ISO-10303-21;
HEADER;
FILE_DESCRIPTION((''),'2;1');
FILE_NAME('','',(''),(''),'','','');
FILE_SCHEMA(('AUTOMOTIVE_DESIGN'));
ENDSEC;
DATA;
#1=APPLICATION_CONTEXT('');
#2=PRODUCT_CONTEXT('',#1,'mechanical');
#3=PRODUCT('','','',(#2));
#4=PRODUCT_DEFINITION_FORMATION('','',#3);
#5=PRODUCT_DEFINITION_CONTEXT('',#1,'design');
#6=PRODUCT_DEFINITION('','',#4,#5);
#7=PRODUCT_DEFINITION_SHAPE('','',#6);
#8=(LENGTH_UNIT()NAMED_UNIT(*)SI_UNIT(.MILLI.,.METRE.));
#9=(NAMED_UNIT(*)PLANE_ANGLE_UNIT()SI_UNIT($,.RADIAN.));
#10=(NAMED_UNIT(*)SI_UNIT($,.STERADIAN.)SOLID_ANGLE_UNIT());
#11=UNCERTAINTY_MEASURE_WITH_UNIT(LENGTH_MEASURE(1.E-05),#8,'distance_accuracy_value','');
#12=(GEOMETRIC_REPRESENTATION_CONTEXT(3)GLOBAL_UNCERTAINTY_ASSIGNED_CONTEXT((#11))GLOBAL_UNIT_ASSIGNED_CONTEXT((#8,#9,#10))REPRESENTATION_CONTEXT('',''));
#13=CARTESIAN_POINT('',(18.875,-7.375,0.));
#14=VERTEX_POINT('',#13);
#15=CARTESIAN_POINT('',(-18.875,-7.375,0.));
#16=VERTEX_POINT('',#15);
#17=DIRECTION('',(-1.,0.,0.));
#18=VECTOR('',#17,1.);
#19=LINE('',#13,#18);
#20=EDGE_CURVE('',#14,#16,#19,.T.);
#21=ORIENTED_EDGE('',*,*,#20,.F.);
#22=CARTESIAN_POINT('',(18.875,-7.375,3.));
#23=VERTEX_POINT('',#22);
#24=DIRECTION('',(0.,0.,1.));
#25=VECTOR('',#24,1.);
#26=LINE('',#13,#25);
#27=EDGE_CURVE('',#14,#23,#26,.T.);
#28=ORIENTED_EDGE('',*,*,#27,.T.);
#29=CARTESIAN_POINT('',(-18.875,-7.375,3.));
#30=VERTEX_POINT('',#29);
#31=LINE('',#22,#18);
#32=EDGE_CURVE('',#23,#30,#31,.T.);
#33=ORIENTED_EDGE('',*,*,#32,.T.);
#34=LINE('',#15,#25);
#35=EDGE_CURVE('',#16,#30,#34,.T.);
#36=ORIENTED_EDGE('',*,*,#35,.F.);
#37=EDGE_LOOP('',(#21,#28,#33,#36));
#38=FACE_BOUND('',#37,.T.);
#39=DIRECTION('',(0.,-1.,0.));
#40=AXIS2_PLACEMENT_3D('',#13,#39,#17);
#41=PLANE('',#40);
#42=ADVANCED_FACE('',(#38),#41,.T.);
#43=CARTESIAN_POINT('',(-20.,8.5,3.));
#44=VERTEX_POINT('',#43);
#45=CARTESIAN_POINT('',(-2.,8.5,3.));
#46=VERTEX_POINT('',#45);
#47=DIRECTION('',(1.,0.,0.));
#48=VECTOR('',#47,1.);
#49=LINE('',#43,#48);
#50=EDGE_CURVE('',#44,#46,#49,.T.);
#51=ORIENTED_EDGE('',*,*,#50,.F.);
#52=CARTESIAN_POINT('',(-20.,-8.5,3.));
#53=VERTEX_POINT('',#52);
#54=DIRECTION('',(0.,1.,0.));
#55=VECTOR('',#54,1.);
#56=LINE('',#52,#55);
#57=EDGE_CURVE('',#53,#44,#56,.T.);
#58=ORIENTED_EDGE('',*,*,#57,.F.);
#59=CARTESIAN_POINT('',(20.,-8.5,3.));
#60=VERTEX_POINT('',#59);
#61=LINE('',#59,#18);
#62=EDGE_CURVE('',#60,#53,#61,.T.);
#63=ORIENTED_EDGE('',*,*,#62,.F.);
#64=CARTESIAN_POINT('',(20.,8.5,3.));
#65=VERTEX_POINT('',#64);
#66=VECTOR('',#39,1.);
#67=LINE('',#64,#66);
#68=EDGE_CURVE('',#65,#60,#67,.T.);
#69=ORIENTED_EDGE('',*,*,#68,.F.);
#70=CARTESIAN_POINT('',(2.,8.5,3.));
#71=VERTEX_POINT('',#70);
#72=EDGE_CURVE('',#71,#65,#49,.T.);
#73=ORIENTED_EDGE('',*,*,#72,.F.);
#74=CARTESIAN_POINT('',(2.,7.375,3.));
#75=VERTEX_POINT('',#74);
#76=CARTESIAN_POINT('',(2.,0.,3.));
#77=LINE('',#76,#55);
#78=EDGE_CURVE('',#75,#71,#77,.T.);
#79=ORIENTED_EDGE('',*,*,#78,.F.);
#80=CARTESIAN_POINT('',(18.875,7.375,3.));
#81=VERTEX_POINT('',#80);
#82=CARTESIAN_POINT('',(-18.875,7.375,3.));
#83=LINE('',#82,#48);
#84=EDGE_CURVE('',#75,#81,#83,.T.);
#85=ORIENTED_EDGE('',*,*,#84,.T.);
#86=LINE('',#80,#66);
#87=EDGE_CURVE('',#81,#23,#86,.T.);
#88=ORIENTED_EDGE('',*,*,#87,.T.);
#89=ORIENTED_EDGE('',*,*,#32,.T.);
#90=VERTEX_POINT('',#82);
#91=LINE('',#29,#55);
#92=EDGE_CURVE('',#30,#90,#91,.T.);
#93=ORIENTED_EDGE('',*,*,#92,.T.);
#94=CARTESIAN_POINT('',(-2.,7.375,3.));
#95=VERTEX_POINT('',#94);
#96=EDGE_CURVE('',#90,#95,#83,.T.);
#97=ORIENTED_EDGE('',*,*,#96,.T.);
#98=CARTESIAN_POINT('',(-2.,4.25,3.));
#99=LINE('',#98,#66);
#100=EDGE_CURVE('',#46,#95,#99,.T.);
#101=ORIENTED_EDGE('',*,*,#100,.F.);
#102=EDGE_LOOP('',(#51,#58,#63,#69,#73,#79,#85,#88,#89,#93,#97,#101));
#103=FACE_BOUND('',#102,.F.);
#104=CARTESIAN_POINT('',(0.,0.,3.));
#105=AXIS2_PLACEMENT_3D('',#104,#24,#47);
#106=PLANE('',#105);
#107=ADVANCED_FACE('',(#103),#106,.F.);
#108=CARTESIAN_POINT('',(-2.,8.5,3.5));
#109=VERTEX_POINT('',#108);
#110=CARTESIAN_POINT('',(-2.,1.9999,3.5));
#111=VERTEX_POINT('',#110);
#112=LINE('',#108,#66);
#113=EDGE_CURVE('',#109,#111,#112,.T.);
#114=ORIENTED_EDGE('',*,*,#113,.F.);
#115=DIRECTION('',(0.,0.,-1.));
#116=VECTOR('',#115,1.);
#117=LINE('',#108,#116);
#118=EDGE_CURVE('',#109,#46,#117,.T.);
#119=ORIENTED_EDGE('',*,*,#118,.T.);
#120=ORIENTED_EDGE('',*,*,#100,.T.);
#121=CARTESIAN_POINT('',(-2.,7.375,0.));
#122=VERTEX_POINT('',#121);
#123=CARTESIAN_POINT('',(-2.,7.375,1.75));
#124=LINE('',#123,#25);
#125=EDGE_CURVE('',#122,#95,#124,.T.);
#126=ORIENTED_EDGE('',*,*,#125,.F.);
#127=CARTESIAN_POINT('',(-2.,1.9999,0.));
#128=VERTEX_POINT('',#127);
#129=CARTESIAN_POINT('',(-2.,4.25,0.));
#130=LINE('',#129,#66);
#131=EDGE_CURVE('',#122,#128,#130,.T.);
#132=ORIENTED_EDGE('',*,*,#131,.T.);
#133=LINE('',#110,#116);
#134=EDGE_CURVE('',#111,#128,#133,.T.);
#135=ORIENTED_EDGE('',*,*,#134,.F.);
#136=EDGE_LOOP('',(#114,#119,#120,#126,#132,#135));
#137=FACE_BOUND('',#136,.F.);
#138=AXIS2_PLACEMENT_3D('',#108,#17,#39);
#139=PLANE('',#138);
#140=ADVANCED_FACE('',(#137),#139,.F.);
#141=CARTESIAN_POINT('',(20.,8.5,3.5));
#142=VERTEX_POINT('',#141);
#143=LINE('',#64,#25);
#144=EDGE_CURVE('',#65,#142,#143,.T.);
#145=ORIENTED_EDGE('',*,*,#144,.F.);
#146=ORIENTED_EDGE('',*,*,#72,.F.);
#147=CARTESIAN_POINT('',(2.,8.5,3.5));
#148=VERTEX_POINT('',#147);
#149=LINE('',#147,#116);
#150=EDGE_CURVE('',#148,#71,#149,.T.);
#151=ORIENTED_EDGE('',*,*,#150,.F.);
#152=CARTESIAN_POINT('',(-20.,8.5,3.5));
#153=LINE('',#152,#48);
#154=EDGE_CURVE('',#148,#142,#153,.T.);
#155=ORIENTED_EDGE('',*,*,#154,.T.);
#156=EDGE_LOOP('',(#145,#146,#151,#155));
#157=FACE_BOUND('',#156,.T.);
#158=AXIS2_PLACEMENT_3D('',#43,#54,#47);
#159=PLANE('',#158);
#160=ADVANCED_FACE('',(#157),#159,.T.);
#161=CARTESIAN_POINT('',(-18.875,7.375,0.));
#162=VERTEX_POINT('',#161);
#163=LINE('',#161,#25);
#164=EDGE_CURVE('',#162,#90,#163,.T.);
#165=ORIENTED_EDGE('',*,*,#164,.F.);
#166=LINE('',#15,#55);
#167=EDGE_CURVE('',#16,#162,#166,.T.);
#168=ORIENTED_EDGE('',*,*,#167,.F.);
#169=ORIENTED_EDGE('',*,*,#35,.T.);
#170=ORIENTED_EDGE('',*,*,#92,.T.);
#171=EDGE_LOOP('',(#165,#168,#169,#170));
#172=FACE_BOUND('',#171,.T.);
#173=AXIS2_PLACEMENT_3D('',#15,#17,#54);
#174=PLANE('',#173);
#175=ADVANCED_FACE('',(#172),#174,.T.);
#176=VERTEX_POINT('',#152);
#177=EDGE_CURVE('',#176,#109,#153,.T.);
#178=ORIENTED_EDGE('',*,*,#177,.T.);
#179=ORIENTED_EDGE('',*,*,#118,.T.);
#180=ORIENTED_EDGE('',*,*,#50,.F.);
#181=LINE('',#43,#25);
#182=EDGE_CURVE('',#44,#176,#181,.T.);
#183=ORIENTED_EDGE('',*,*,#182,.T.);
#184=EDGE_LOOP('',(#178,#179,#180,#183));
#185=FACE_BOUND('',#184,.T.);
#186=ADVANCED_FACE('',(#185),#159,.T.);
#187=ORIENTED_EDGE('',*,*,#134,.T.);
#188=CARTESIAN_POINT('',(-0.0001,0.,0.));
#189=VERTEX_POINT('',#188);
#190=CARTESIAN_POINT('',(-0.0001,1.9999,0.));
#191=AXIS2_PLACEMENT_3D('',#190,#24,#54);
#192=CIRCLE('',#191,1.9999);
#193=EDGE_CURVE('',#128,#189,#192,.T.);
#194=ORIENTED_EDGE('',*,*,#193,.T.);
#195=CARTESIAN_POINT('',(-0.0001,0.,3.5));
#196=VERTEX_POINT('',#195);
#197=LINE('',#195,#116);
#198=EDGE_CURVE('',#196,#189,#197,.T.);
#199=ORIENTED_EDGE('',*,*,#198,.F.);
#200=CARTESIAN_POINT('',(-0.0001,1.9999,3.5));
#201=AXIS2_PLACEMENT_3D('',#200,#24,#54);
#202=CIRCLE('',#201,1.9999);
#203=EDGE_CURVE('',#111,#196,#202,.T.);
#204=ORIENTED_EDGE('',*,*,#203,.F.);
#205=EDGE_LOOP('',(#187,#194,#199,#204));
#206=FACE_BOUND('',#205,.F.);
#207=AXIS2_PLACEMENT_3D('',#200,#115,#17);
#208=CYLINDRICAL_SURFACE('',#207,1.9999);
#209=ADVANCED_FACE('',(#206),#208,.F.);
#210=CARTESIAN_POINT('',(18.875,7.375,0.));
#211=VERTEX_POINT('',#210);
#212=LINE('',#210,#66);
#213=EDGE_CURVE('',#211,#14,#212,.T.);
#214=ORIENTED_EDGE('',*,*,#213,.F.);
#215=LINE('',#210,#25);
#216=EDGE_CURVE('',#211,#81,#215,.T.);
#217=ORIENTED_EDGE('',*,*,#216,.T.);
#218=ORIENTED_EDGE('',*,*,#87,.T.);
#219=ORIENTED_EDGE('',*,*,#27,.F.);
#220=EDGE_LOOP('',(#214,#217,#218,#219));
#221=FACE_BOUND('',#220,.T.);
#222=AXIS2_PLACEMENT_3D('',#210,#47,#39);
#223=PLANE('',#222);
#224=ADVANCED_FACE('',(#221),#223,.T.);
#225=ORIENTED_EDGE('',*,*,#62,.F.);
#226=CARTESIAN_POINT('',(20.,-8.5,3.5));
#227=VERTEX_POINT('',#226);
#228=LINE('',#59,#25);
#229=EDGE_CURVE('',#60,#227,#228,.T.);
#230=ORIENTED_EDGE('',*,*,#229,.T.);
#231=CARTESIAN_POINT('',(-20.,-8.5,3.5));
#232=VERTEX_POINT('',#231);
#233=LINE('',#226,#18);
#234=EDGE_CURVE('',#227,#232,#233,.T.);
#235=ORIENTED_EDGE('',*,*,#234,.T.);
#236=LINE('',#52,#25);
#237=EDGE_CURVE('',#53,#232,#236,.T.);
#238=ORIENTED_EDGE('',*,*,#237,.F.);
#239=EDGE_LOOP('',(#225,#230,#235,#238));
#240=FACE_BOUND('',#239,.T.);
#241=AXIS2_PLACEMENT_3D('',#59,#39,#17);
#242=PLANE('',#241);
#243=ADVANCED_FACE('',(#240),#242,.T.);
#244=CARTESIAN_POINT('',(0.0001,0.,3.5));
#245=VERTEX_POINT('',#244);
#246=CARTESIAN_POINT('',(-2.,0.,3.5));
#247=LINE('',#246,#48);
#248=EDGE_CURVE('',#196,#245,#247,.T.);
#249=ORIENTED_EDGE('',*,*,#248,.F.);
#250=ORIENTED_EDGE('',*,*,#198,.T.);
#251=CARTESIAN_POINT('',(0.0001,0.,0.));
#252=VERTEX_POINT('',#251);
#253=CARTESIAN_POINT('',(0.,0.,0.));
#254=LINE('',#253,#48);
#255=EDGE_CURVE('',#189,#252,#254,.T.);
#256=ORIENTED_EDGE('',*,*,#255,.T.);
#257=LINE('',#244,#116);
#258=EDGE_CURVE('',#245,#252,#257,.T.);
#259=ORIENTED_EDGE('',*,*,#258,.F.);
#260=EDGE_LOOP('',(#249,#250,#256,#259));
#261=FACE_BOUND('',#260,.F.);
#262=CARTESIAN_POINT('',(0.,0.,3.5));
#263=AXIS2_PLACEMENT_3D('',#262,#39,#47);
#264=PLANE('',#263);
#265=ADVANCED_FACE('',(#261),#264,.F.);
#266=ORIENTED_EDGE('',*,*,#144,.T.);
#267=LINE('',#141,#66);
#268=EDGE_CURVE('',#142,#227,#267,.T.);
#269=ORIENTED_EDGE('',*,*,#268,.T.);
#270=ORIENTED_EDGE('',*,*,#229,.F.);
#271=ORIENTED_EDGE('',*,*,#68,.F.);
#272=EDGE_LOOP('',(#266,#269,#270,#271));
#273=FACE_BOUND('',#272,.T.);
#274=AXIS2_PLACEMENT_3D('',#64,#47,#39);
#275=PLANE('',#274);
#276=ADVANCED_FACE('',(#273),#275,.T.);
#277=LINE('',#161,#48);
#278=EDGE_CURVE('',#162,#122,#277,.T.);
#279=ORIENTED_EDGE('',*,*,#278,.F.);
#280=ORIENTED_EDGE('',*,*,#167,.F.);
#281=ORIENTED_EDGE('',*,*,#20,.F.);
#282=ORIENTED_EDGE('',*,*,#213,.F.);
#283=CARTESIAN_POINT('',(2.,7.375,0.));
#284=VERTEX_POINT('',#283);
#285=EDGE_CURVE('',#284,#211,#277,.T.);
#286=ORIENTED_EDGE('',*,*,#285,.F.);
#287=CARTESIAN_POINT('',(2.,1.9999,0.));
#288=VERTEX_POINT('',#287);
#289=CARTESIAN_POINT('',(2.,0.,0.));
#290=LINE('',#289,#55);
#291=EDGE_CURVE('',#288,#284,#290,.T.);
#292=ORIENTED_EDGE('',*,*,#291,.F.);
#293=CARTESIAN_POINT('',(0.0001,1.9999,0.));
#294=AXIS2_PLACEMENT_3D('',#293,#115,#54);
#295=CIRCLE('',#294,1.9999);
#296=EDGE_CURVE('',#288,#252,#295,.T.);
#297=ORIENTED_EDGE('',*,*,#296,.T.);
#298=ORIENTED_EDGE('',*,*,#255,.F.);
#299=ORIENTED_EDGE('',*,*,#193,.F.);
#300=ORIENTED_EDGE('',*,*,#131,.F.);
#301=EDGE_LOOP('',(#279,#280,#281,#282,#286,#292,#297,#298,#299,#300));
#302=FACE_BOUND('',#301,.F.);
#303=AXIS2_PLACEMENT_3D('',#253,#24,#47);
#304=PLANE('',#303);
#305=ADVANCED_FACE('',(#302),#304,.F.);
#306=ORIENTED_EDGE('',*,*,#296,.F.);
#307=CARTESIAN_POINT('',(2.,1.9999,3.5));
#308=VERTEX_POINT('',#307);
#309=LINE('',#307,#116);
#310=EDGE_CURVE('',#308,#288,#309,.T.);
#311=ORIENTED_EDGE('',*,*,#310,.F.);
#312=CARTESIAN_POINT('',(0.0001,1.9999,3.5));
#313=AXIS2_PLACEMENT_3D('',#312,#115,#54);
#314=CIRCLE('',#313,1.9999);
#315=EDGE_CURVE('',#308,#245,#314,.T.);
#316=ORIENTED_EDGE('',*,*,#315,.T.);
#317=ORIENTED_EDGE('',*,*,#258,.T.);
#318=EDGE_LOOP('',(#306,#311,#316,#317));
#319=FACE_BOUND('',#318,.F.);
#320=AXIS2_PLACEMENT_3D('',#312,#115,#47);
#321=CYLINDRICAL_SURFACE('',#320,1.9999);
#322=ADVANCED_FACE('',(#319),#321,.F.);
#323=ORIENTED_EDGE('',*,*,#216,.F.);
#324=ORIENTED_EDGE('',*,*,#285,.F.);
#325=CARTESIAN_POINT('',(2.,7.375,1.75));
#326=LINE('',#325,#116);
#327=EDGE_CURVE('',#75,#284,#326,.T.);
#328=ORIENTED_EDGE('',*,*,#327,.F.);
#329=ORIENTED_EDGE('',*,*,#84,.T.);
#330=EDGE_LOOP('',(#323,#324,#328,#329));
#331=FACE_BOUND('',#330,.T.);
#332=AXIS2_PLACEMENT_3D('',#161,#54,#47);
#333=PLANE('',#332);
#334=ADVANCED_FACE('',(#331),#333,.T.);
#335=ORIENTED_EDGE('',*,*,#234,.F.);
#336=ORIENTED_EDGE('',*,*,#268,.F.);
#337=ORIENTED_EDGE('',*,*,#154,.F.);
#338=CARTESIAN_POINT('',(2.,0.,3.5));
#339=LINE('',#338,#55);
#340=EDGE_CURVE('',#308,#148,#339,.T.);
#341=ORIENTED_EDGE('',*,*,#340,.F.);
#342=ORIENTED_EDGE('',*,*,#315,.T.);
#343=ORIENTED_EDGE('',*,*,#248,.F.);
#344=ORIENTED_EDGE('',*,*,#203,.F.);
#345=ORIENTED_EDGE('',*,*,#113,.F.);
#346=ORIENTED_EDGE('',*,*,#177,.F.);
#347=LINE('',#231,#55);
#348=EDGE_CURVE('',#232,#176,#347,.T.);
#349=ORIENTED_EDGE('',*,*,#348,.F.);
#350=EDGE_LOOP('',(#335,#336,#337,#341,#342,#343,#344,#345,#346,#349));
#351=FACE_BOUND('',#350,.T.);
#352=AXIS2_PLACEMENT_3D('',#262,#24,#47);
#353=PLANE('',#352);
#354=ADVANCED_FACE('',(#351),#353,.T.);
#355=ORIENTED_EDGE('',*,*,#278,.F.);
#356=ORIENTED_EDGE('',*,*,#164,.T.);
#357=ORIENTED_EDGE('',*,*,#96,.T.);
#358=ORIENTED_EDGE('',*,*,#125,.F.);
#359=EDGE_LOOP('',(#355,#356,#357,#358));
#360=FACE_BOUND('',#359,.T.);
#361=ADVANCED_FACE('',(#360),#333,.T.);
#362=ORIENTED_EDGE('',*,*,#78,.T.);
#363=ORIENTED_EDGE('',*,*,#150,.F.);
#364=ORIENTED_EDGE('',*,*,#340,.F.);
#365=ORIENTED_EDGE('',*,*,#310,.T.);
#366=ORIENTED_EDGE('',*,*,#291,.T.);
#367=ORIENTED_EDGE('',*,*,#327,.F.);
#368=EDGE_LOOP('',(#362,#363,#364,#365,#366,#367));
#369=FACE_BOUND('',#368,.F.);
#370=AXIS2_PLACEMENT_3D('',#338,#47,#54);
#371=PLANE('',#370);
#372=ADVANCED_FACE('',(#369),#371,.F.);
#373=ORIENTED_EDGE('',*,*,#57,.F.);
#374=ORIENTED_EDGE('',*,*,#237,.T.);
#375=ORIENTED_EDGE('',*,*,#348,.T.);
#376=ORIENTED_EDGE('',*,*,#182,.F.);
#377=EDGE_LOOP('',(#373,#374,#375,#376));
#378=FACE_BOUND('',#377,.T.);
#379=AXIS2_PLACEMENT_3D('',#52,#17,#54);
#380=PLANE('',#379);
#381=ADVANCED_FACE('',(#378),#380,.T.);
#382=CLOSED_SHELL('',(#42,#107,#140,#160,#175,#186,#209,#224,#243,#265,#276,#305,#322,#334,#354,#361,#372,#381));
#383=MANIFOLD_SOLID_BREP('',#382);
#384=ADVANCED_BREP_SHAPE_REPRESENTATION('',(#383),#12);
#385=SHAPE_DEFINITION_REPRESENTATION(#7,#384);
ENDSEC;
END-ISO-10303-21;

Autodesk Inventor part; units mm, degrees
ref_plane "YZ Plane" through (0, 0, 0) normal (1, 0, 0) x (0, 1, 0)
ref_plane "XZ Plane" through (0, 0, 0) normal (0, 1, 0) x (-1, 0, 0)
ref_plane "XY Plane" through (0, 0, 0) normal (0, 0, 1) x (1, 0, 0)
sketch "Sketch1" plane through (0, 0, 0) normal (0, 0, 1) x (1, 0, 0)
  line L0 (-18.875, 7.375) -> (18.875, 7.375)
  line L1 (18.875, 7.375) -> (18.875, -7.375)
  line L2 (18.875, -7.375) -> (-18.875, -7.375)
  line L3 (-18.875, -7.375) -> (-18.875, 7.375)
  line L4 (-18.875, 7.375) -> (18.875, -7.375) construction
  line L5 (18.875, 7.375) -> (-18.875, -7.375) construction
  point P0 (0, 0)
  dimension "d0" = 37.75
  dimension "d1" = 14.75
extrude "Extrusion1" add sketch "Sketch1" along normal blind 3
sketch "Sketch2" plane through (0, 0, 3) normal (0, 0, 1) x (1, 0, 0)
  line L0 (-18.875, -7.375) -> (18.875, -7.375) projected
  line L1 (18.875, -7.375) -> (18.875, 7.375) projected
  line L2 (18.875, 7.375) -> (-18.875, 7.375) projected
  line L3 (-18.875, 7.375) -> (-18.875, -7.375) projected
  line L4 (-20, 8.5) -> (20, 8.5)
  line L5 (20, 8.5) -> (20, -8.5)
  line L6 (20, -8.5) -> (-20, -8.5)
  line L7 (-20, -8.5) -> (-20, 8.5)
  line L8 (-20, 8.5) -> (20, -8.5) construction
  line L9 (20, 8.5) -> (-20, -8.5) construction
  point P0 (0, 0)
  dimension "d4" = 40
  dimension "d5" = 17
extrude "Extrusion2" add sketch "Sketch2" along normal blind 0.5 contours L3 L2 L1 L0 | L4 L5 L6 L7
sketch "Sketch3" plane through (0, 0, 3.5) normal (0, 0, 1) x (1, 0, 0)
  line L0 (-20, -8.5) -> (20, -8.5) projected
  line L1 (20, -8.5) -> (20, 8.5) projected
  line L2 (20, 8.5) -> (-20, 8.5) projected
  line L3 (-20, 8.5) -> (-20, -8.5) projected
  line L4 (20, 8.5) -> (-20, 8.5) projected
  line L5 (-2, 0) -> (2, 0)
  line L6 (2, 0) -> (2, 8.5)
  line L7 (2, 8.5) -> (-2, 8.5)
  line L8 (-2, 8.5) -> (-2, 0)
  line L9 (0, -11.9) -> (0, 11.9) projected
  line L10 (-28, 0) -> (28, 0) projected
  point P0 (0, 0)
  dimension "d8" = 4
extrude "Extrusion3" cut sketch "Sketch3" against normal through all contours L9 L2 L6 L5 | L5 L8 L2 L9
fillet "Fillet1" radius 2 2 edges at (-2, 0, 1.75) (2, 0, 1.75)
equation "\"BendRadius\" = Thickness"
equation "\"BendReliefWidth\" = Thickness"
equation "\"BendReliefDepth\" = 0.5 * Thickness"
equation "\"CornerReliefSize\" = 4 * Thickness"
equation "\"MinimumRemnant\" = 2 * Thickness"
equation "\"TransitionRadius\" = BendRadius"
equation "\"JacobiRadiusSize\" = BendRadius"
equation "\"GapSize\" = Thickness"
equation "\"Thickness\" = 3.048"
properties part number "_3DPrint"
